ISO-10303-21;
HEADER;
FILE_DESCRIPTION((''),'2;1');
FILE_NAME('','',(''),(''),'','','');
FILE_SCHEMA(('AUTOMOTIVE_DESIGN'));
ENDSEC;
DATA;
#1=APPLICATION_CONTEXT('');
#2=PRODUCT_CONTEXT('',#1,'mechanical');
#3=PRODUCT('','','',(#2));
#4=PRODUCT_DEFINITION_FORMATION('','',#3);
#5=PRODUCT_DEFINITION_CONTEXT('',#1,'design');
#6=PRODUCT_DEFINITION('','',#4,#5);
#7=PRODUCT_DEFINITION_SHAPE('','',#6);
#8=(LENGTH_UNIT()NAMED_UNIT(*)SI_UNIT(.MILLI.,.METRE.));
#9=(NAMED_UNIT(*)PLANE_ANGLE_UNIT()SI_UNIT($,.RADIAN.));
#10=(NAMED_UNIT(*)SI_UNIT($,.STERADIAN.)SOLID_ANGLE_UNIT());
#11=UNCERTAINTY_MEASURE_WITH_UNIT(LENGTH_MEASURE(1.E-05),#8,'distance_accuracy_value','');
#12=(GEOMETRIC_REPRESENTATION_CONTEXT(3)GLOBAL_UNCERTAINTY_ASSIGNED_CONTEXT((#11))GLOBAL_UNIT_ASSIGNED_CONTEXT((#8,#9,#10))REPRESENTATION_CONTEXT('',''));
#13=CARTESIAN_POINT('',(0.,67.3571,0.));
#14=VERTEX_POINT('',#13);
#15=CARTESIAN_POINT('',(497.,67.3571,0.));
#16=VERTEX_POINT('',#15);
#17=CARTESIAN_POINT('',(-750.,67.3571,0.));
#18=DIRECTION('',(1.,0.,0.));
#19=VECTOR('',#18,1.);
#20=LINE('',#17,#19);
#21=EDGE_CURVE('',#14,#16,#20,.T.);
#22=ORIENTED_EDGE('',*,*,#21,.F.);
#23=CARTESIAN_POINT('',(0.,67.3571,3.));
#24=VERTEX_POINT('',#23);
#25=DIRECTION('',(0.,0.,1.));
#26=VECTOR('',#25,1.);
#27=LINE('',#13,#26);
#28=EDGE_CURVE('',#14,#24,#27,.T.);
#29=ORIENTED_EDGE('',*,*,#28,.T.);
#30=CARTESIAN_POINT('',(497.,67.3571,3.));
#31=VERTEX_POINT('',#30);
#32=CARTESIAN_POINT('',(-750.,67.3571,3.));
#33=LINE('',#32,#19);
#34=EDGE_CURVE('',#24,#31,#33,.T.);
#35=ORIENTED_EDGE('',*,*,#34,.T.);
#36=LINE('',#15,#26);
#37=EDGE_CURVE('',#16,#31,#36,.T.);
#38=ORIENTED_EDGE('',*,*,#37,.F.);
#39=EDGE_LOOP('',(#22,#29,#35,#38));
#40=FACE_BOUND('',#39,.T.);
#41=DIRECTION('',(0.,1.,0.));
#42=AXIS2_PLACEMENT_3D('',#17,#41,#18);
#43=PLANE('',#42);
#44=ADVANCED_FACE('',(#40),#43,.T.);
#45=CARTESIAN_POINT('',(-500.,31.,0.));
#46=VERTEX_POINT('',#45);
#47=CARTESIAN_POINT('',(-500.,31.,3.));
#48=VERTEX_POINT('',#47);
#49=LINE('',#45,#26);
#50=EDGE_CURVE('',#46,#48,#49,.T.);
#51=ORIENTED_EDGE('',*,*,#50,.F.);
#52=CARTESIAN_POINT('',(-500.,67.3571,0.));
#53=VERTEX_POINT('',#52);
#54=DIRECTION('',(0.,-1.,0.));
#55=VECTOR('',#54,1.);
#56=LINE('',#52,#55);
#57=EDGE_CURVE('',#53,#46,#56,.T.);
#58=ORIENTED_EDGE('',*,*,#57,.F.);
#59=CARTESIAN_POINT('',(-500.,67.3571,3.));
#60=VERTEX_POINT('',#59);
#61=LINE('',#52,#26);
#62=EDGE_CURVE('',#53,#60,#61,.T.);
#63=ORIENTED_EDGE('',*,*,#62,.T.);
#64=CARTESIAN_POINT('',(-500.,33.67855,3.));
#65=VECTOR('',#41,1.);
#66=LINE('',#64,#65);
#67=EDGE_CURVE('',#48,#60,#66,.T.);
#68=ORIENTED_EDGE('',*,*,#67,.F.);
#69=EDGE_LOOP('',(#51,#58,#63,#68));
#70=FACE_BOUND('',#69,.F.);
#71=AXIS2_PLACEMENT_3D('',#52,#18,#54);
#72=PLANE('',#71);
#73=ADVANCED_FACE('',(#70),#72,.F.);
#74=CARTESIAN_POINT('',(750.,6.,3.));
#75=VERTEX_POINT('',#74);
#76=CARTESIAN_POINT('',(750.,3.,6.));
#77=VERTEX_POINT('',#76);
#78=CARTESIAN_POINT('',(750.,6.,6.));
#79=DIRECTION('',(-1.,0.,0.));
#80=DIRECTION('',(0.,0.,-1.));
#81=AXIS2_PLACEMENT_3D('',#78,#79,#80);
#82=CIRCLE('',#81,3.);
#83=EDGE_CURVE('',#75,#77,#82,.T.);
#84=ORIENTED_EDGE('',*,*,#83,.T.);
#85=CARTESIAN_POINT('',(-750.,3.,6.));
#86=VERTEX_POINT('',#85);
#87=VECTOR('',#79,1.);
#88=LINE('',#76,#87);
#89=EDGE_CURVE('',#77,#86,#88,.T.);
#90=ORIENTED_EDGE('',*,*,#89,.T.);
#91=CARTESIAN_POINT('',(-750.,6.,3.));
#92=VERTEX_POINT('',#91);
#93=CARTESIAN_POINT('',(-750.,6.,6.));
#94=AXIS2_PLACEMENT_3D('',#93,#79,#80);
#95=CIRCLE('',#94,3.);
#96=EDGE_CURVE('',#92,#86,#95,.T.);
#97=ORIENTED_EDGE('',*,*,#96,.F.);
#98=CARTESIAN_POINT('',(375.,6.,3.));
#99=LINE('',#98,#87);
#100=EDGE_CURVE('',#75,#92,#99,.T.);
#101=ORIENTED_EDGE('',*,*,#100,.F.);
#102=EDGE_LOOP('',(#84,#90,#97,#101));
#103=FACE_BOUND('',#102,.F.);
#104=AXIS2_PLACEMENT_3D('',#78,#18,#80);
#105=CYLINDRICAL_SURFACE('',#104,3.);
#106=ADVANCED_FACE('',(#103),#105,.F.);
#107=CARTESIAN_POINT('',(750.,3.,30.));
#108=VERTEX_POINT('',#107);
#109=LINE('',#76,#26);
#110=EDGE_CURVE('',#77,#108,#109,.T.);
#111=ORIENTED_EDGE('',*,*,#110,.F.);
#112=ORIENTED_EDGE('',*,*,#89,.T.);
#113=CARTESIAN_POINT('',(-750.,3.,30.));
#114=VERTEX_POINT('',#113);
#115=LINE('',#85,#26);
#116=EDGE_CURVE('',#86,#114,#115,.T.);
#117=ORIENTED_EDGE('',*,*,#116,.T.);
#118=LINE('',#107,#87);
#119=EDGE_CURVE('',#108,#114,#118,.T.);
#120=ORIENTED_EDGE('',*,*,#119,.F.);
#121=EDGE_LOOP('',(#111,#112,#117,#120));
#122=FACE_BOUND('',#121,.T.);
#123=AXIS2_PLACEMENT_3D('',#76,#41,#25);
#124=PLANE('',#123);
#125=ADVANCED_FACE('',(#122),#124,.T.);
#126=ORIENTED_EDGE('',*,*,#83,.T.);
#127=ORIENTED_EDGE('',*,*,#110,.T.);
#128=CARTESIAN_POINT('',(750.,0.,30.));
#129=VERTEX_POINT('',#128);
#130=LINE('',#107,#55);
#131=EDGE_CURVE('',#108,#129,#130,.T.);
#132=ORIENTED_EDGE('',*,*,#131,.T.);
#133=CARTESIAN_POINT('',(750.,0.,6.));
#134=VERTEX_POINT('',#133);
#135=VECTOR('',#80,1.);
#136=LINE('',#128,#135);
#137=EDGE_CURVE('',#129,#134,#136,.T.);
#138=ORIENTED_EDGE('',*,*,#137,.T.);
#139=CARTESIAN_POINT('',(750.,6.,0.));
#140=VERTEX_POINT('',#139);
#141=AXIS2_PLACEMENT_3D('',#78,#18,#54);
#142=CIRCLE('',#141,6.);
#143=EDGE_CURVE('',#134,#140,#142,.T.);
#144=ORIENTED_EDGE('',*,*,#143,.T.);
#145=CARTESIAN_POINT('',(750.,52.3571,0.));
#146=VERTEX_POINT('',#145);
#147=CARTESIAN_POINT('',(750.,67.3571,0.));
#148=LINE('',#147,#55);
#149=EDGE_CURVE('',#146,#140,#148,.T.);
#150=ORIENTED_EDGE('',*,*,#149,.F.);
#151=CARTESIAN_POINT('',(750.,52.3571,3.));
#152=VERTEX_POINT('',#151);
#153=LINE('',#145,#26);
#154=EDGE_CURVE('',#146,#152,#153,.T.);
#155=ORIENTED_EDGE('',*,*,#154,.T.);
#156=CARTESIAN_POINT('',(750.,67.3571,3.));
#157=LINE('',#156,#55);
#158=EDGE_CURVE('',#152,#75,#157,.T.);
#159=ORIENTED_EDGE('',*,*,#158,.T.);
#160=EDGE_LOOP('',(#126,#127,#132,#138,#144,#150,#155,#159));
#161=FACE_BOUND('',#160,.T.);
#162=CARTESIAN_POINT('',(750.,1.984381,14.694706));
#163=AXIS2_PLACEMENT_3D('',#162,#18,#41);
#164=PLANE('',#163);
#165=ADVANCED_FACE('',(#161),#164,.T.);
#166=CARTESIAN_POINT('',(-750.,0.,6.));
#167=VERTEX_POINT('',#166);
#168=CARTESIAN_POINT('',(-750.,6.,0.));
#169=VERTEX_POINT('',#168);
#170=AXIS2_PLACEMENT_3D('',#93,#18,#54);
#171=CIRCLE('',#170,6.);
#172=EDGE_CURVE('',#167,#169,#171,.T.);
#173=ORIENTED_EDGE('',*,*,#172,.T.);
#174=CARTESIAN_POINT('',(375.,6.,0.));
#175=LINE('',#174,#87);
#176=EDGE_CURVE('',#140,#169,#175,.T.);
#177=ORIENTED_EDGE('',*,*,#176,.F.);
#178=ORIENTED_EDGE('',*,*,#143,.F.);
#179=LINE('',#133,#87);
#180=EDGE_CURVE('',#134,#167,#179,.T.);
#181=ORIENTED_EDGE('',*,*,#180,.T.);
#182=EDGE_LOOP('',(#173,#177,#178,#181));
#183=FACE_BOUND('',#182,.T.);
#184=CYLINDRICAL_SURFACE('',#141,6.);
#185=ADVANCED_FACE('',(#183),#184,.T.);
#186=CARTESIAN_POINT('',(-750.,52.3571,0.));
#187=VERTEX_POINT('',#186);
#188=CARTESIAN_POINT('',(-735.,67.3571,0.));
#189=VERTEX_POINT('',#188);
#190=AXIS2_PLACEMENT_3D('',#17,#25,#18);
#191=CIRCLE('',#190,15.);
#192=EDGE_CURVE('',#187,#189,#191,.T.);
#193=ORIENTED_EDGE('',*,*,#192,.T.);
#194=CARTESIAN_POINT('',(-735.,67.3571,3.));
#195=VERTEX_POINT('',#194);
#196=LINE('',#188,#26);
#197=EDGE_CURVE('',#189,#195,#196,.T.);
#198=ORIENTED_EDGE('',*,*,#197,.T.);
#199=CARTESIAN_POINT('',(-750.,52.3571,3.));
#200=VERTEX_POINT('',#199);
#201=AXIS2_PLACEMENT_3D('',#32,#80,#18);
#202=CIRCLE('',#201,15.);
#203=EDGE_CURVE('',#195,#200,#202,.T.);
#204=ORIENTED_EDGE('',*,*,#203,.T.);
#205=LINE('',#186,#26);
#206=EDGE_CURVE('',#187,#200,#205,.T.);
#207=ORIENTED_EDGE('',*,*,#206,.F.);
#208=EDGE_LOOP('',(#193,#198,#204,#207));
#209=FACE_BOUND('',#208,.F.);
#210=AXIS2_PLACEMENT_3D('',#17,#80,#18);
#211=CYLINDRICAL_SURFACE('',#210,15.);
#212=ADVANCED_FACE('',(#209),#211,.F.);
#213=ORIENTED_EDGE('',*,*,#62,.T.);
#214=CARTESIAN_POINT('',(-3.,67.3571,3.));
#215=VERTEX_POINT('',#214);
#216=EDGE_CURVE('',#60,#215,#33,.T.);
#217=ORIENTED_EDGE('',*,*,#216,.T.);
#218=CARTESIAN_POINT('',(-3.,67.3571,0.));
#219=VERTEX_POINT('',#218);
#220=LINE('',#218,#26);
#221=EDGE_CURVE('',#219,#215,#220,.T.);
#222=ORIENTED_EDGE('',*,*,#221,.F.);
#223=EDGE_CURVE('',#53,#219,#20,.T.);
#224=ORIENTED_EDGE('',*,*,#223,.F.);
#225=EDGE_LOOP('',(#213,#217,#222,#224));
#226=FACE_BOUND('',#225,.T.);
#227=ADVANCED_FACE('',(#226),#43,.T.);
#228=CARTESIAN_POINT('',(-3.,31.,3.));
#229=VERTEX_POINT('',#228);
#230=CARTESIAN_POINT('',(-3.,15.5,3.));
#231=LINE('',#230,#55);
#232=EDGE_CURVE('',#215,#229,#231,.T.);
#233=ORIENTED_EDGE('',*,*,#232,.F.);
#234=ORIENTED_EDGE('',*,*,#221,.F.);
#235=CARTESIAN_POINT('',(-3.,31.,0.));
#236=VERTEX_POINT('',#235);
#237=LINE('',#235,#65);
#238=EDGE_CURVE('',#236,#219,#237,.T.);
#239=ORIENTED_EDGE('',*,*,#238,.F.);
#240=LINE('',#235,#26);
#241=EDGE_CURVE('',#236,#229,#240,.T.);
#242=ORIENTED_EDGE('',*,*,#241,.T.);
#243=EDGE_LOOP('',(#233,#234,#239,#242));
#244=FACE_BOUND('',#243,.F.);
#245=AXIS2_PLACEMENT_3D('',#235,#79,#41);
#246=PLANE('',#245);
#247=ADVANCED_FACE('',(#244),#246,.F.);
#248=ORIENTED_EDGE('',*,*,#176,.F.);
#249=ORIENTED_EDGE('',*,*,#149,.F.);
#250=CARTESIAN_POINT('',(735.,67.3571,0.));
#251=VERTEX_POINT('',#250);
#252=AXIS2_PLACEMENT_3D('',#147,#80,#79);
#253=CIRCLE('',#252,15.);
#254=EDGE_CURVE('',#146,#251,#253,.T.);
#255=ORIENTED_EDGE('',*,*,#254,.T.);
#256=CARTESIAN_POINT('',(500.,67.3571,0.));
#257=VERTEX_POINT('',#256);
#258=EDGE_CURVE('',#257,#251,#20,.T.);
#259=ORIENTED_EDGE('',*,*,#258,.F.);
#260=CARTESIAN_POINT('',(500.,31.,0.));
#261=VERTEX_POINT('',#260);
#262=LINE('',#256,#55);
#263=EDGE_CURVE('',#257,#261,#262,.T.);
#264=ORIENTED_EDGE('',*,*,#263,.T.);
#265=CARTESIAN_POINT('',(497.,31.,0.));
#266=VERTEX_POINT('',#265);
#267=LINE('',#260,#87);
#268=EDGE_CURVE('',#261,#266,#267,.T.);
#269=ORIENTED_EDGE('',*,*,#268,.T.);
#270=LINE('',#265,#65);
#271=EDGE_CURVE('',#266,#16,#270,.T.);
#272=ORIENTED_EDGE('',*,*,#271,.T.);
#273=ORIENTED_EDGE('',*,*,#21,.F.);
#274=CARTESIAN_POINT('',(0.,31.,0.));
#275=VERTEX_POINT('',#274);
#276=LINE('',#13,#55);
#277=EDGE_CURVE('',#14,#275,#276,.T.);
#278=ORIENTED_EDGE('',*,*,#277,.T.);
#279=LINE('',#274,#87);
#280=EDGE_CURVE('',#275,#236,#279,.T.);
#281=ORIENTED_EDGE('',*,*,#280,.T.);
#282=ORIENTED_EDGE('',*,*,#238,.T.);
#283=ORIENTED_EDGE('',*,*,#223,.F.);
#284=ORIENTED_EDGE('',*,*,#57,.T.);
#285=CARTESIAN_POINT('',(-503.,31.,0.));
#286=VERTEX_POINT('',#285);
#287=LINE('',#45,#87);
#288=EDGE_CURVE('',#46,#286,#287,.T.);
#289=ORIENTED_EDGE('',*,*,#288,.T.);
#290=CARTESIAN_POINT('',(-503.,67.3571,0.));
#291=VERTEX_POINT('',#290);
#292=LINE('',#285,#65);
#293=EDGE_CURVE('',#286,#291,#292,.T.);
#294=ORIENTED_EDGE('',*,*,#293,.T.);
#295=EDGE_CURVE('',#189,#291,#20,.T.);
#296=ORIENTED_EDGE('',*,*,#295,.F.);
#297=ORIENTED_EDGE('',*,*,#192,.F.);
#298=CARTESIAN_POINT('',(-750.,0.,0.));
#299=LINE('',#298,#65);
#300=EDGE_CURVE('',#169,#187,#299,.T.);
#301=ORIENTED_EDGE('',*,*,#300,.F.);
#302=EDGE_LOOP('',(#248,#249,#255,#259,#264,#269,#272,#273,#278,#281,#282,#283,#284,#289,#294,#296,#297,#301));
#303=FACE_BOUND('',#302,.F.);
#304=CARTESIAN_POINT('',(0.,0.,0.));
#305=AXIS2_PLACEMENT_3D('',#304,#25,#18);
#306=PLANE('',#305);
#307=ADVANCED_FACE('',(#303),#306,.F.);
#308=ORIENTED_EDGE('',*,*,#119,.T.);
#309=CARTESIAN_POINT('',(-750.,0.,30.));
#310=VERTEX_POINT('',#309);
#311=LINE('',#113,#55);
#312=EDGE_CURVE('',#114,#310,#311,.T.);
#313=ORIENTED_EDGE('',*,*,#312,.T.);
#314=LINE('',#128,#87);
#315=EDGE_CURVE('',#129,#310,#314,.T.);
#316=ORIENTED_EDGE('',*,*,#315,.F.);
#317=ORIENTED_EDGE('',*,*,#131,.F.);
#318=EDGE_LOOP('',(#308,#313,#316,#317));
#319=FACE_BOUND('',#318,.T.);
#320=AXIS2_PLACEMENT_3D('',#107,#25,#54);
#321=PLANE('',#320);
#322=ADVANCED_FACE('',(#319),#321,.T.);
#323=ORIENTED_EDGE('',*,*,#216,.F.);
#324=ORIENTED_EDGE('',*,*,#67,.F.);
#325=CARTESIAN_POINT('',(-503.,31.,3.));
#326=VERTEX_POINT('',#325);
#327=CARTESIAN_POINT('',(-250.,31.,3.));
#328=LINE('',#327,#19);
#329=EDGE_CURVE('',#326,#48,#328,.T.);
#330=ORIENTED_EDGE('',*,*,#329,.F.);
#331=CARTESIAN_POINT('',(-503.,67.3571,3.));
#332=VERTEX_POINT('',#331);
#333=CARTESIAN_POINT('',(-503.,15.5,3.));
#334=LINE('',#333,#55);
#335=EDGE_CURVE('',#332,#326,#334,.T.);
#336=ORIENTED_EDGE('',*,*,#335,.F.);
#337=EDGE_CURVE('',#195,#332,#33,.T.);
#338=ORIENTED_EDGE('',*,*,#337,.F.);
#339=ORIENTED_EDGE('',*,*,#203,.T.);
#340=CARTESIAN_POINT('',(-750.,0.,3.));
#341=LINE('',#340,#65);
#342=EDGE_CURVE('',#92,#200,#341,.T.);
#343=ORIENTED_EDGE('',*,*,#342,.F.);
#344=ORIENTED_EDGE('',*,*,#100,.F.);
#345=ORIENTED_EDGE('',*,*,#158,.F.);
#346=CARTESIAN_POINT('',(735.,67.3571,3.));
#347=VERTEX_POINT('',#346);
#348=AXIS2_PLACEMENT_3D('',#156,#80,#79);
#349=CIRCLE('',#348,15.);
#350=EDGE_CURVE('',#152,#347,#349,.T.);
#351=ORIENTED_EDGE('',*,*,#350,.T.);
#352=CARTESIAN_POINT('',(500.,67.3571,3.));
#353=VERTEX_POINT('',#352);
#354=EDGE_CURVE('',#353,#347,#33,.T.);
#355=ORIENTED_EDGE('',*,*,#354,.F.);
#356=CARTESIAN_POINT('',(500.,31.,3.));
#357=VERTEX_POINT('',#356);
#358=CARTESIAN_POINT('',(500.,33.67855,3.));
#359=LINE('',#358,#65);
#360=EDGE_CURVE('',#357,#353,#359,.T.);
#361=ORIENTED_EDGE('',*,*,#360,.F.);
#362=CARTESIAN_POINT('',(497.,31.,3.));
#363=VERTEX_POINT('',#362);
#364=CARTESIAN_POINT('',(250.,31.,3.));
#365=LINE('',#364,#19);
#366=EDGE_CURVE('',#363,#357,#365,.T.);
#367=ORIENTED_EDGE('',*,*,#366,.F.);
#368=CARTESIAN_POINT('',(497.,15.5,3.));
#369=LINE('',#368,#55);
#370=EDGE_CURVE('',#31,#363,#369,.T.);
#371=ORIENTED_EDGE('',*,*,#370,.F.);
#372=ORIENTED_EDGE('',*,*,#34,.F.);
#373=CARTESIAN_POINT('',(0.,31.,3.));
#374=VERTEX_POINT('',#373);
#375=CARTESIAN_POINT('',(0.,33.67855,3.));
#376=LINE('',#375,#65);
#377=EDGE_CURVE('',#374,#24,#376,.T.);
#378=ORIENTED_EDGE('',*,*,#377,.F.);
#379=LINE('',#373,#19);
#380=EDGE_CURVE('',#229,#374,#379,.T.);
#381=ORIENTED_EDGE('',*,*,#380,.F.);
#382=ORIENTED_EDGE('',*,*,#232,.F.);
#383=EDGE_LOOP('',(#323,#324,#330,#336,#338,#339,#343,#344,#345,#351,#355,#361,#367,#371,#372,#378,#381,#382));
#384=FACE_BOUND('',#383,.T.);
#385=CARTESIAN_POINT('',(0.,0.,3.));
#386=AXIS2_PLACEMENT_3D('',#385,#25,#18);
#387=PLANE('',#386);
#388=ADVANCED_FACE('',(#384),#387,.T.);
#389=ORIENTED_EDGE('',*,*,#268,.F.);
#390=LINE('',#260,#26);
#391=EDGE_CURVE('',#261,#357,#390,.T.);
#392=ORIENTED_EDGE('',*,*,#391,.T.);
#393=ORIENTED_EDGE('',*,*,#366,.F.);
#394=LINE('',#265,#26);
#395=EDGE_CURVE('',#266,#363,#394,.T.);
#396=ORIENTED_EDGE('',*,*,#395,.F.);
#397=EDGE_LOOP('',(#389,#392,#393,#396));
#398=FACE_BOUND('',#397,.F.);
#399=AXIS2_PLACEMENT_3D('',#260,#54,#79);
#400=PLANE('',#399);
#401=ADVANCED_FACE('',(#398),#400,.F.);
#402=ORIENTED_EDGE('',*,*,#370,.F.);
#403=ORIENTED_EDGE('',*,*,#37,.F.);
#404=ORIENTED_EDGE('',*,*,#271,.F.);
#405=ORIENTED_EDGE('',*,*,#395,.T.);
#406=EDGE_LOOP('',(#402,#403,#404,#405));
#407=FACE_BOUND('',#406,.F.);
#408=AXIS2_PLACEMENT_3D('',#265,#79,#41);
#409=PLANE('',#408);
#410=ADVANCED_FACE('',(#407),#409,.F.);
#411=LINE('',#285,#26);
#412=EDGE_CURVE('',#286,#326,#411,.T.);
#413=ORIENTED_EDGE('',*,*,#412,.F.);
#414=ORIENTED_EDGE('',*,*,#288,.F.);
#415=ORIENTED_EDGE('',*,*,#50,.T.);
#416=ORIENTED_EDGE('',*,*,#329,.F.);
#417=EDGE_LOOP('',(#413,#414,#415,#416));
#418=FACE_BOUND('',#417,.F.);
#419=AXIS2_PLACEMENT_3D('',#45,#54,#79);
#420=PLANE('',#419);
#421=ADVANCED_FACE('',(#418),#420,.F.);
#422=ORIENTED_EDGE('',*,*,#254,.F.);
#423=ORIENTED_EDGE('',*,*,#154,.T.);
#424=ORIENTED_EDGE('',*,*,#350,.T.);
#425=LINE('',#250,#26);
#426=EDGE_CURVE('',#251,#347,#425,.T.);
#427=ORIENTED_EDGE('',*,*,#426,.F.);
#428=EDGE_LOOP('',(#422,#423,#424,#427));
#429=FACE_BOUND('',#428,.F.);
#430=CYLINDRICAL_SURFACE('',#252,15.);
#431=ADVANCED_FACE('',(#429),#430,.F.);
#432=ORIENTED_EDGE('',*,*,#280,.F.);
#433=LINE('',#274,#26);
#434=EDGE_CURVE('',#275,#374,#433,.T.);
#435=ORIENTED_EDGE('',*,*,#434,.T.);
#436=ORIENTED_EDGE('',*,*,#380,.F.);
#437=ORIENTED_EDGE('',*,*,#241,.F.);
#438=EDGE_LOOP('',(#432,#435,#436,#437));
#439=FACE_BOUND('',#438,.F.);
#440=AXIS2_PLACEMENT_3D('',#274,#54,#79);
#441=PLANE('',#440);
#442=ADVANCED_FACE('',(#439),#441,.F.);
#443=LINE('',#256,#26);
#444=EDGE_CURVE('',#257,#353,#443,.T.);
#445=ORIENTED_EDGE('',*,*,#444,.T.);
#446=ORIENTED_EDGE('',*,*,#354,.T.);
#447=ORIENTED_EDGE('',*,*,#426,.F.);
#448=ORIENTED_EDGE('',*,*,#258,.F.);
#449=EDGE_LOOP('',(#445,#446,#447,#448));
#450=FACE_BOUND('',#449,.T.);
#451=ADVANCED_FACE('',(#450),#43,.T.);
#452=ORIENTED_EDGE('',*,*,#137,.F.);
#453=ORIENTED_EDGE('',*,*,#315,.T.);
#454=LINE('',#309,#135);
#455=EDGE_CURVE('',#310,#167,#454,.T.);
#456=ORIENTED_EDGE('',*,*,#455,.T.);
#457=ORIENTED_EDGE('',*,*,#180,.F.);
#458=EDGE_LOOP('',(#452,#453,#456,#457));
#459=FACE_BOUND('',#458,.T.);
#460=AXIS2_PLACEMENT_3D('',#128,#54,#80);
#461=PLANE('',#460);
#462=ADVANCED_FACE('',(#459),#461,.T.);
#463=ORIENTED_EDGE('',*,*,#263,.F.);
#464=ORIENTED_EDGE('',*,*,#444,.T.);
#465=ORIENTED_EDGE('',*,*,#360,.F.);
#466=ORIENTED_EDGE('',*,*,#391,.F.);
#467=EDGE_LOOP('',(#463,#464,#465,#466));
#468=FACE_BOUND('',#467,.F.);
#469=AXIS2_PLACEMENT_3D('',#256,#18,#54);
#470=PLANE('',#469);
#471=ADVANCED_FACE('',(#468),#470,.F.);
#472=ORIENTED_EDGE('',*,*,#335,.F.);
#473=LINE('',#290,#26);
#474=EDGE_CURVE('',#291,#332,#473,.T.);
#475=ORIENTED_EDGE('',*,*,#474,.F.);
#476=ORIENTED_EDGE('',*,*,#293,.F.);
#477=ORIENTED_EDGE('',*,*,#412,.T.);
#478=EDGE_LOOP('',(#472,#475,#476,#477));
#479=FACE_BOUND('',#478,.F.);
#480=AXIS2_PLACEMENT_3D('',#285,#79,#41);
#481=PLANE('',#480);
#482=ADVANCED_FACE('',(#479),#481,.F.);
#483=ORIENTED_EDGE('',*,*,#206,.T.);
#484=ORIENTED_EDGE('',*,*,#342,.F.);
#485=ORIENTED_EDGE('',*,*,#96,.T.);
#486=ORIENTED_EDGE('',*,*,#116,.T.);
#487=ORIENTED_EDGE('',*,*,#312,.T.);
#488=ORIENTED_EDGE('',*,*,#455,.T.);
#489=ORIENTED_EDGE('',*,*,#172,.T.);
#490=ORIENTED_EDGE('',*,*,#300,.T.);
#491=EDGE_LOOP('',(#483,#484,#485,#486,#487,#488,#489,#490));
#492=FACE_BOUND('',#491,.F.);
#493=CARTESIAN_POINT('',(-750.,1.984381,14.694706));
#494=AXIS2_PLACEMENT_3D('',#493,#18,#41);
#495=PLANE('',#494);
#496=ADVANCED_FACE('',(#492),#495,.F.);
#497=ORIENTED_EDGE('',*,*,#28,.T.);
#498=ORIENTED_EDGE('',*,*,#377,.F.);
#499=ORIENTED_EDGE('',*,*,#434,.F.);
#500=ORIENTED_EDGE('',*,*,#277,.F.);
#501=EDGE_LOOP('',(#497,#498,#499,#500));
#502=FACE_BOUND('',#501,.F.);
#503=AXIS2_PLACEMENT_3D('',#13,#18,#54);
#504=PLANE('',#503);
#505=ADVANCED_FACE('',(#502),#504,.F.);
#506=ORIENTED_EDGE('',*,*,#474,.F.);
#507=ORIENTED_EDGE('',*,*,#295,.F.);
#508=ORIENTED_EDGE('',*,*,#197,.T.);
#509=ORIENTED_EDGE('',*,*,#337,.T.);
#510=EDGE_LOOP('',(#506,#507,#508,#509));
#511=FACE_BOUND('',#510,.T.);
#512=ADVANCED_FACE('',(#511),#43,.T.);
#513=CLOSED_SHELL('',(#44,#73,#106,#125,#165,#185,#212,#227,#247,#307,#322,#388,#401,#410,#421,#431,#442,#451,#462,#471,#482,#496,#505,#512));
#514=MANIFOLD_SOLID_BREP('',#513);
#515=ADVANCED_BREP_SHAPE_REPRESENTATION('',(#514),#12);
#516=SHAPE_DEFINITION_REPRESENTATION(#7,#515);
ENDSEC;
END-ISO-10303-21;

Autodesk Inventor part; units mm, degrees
ref_plane "YZ Plane" through (0, 0, 0) normal (1, 0, 0) x (0, 1, 0)
ref_plane "XZ Plane" through (0, 0, 0) normal (0, 1, 0) x (-1, 0, 0)
ref_plane "XY Plane" through (0, 0, 0) normal (0, 0, 1) x (1, 0, 0)
sketch "Sketch1" plane through (0, 0, 0) normal (0, 0, 1) x (1, 0, 0)
  line L0 (-750, 67.3571) -> (750, 67.3571)
  line L1 (750, 67.3571) -> (750, 0)
  line L2 (750, 0) -> (-750, 0)
  line L3 (-750, 0) -> (-750, 67.3571)
  point P0 (0, 0)
  point P1 (0, 0)
  dimension "d0" = 1500
  dimension "d1" = 67.3571
extrude "Plate1" add sketch "Sketch1" along normal blind 3
sketch "Sketch2" plane through (750, 3, 0) normal (0, -1, 0) x (1, 0, 0)
  line L0 (-1500, 0) -> (0, 0)
  line L1 (0, 0) -> (0, 30)
  line L2 (0, 30) -> (-1500, 30)
  line L3 (-1500, 30) -> (-1500, 0)
edge flange "Flange1" height 30 angle 90 thickness 3 bend radius 3 thickness toward (0, -1, 0) relief tear relief width 3 relief depth 1.5 edges at (0, 0, 3) wall of the first edge with corners at (-750, 3, 0) (750, 3, 0) (750, 3, 30) (-750, 3, 30)
bend "Bend1"
corner "Corner1"
sketch "Sketch5" plane through (0, 0, 0) normal (0, 0, -1) x (-1, 0, 0)
  line L0 (750, 67.3571) -> (-750, 67.3571) projected
  line L1 (500, 67.3571) -> (500, 31)
  line L2 (500, 31) -> (503, 31)
  line L3 (503, 31) -> (503, 67.3571)
  line L4 (750, 0) -> (-750, 0) projected
  point P0 (0, 0)
  dimension "d18" = 3
  dimension "d19" = 247
  dimension "d20" = 31
extrude "Extrusion1" cut sketch "Sketch5" against normal through all
pattern_linear "Rectangular Pattern1" count 3 spacing 500 along (1, 0, 0) of "Extrusion1"
sketch "Sketch6" plane through (0, 0, 0) normal (0, 0, -1) x (-1, 0, 0)
  line L0 (-750, 67.3571) -> (-750, 6) projected
  circle A0 centre (-750, 67.3571) radius 15
  line L1 (-750, 67.3571) -> (750, 67.3571) projected
  point P0 (0, 0)
  point P1 (-500, 67.3571)
  point P2 (-735, 67.3571)
  point P3 (-750, 52.3571)
  dimension "d24" = 30
extrude "Extrusion2" cut sketch "Sketch6" against normal through all contours L1 A0 L0 picked at (-740.1254, 66.2445)
mirror "Mirror1" about plane through (0, 0, 0) normal (1, 0, 0) of "Extrusion2"
equation "\"d1\" = Стрингер_3"
equation "\"d18\" = Thickness"
equation "\"d2\" = Thickness"
equation "\"d3\" = BendReliefWidth"
equation "\"d4\" = BendReliefDepth"
equation "\"d5\" = MinimumRemnant"
equation "\"d6\" = TransitionRadius"
equation "\"d9\" = BendRadius"
equation "\"d10\" = CornerReliefSize"
equation "\"d11\" = GapSize"
equation "\"d12\" = JacobiRadiusSize"
equation "\"BendRadius\" = Thickness"
equation "\"BendReliefWidth\" = Thickness"
equation "\"BendReliefDepth\" = 0.5 * Thickness"
equation "\"CornerReliefSize\" = 4 * Thickness"
equation "\"MinimumRemnant\" = 2 * Thickness"
equation "\"TransitionRadius\" = BendRadius"
equation "\"JacobiRadiusSize\" = BendRadius"
equation "\"GapSize\" = Thickness"
equation "\"Стрингер_3\" = 67.357059"
equation "\"Thickness\" = 3"
properties part number "МОО 053 стрингер борт 31"
